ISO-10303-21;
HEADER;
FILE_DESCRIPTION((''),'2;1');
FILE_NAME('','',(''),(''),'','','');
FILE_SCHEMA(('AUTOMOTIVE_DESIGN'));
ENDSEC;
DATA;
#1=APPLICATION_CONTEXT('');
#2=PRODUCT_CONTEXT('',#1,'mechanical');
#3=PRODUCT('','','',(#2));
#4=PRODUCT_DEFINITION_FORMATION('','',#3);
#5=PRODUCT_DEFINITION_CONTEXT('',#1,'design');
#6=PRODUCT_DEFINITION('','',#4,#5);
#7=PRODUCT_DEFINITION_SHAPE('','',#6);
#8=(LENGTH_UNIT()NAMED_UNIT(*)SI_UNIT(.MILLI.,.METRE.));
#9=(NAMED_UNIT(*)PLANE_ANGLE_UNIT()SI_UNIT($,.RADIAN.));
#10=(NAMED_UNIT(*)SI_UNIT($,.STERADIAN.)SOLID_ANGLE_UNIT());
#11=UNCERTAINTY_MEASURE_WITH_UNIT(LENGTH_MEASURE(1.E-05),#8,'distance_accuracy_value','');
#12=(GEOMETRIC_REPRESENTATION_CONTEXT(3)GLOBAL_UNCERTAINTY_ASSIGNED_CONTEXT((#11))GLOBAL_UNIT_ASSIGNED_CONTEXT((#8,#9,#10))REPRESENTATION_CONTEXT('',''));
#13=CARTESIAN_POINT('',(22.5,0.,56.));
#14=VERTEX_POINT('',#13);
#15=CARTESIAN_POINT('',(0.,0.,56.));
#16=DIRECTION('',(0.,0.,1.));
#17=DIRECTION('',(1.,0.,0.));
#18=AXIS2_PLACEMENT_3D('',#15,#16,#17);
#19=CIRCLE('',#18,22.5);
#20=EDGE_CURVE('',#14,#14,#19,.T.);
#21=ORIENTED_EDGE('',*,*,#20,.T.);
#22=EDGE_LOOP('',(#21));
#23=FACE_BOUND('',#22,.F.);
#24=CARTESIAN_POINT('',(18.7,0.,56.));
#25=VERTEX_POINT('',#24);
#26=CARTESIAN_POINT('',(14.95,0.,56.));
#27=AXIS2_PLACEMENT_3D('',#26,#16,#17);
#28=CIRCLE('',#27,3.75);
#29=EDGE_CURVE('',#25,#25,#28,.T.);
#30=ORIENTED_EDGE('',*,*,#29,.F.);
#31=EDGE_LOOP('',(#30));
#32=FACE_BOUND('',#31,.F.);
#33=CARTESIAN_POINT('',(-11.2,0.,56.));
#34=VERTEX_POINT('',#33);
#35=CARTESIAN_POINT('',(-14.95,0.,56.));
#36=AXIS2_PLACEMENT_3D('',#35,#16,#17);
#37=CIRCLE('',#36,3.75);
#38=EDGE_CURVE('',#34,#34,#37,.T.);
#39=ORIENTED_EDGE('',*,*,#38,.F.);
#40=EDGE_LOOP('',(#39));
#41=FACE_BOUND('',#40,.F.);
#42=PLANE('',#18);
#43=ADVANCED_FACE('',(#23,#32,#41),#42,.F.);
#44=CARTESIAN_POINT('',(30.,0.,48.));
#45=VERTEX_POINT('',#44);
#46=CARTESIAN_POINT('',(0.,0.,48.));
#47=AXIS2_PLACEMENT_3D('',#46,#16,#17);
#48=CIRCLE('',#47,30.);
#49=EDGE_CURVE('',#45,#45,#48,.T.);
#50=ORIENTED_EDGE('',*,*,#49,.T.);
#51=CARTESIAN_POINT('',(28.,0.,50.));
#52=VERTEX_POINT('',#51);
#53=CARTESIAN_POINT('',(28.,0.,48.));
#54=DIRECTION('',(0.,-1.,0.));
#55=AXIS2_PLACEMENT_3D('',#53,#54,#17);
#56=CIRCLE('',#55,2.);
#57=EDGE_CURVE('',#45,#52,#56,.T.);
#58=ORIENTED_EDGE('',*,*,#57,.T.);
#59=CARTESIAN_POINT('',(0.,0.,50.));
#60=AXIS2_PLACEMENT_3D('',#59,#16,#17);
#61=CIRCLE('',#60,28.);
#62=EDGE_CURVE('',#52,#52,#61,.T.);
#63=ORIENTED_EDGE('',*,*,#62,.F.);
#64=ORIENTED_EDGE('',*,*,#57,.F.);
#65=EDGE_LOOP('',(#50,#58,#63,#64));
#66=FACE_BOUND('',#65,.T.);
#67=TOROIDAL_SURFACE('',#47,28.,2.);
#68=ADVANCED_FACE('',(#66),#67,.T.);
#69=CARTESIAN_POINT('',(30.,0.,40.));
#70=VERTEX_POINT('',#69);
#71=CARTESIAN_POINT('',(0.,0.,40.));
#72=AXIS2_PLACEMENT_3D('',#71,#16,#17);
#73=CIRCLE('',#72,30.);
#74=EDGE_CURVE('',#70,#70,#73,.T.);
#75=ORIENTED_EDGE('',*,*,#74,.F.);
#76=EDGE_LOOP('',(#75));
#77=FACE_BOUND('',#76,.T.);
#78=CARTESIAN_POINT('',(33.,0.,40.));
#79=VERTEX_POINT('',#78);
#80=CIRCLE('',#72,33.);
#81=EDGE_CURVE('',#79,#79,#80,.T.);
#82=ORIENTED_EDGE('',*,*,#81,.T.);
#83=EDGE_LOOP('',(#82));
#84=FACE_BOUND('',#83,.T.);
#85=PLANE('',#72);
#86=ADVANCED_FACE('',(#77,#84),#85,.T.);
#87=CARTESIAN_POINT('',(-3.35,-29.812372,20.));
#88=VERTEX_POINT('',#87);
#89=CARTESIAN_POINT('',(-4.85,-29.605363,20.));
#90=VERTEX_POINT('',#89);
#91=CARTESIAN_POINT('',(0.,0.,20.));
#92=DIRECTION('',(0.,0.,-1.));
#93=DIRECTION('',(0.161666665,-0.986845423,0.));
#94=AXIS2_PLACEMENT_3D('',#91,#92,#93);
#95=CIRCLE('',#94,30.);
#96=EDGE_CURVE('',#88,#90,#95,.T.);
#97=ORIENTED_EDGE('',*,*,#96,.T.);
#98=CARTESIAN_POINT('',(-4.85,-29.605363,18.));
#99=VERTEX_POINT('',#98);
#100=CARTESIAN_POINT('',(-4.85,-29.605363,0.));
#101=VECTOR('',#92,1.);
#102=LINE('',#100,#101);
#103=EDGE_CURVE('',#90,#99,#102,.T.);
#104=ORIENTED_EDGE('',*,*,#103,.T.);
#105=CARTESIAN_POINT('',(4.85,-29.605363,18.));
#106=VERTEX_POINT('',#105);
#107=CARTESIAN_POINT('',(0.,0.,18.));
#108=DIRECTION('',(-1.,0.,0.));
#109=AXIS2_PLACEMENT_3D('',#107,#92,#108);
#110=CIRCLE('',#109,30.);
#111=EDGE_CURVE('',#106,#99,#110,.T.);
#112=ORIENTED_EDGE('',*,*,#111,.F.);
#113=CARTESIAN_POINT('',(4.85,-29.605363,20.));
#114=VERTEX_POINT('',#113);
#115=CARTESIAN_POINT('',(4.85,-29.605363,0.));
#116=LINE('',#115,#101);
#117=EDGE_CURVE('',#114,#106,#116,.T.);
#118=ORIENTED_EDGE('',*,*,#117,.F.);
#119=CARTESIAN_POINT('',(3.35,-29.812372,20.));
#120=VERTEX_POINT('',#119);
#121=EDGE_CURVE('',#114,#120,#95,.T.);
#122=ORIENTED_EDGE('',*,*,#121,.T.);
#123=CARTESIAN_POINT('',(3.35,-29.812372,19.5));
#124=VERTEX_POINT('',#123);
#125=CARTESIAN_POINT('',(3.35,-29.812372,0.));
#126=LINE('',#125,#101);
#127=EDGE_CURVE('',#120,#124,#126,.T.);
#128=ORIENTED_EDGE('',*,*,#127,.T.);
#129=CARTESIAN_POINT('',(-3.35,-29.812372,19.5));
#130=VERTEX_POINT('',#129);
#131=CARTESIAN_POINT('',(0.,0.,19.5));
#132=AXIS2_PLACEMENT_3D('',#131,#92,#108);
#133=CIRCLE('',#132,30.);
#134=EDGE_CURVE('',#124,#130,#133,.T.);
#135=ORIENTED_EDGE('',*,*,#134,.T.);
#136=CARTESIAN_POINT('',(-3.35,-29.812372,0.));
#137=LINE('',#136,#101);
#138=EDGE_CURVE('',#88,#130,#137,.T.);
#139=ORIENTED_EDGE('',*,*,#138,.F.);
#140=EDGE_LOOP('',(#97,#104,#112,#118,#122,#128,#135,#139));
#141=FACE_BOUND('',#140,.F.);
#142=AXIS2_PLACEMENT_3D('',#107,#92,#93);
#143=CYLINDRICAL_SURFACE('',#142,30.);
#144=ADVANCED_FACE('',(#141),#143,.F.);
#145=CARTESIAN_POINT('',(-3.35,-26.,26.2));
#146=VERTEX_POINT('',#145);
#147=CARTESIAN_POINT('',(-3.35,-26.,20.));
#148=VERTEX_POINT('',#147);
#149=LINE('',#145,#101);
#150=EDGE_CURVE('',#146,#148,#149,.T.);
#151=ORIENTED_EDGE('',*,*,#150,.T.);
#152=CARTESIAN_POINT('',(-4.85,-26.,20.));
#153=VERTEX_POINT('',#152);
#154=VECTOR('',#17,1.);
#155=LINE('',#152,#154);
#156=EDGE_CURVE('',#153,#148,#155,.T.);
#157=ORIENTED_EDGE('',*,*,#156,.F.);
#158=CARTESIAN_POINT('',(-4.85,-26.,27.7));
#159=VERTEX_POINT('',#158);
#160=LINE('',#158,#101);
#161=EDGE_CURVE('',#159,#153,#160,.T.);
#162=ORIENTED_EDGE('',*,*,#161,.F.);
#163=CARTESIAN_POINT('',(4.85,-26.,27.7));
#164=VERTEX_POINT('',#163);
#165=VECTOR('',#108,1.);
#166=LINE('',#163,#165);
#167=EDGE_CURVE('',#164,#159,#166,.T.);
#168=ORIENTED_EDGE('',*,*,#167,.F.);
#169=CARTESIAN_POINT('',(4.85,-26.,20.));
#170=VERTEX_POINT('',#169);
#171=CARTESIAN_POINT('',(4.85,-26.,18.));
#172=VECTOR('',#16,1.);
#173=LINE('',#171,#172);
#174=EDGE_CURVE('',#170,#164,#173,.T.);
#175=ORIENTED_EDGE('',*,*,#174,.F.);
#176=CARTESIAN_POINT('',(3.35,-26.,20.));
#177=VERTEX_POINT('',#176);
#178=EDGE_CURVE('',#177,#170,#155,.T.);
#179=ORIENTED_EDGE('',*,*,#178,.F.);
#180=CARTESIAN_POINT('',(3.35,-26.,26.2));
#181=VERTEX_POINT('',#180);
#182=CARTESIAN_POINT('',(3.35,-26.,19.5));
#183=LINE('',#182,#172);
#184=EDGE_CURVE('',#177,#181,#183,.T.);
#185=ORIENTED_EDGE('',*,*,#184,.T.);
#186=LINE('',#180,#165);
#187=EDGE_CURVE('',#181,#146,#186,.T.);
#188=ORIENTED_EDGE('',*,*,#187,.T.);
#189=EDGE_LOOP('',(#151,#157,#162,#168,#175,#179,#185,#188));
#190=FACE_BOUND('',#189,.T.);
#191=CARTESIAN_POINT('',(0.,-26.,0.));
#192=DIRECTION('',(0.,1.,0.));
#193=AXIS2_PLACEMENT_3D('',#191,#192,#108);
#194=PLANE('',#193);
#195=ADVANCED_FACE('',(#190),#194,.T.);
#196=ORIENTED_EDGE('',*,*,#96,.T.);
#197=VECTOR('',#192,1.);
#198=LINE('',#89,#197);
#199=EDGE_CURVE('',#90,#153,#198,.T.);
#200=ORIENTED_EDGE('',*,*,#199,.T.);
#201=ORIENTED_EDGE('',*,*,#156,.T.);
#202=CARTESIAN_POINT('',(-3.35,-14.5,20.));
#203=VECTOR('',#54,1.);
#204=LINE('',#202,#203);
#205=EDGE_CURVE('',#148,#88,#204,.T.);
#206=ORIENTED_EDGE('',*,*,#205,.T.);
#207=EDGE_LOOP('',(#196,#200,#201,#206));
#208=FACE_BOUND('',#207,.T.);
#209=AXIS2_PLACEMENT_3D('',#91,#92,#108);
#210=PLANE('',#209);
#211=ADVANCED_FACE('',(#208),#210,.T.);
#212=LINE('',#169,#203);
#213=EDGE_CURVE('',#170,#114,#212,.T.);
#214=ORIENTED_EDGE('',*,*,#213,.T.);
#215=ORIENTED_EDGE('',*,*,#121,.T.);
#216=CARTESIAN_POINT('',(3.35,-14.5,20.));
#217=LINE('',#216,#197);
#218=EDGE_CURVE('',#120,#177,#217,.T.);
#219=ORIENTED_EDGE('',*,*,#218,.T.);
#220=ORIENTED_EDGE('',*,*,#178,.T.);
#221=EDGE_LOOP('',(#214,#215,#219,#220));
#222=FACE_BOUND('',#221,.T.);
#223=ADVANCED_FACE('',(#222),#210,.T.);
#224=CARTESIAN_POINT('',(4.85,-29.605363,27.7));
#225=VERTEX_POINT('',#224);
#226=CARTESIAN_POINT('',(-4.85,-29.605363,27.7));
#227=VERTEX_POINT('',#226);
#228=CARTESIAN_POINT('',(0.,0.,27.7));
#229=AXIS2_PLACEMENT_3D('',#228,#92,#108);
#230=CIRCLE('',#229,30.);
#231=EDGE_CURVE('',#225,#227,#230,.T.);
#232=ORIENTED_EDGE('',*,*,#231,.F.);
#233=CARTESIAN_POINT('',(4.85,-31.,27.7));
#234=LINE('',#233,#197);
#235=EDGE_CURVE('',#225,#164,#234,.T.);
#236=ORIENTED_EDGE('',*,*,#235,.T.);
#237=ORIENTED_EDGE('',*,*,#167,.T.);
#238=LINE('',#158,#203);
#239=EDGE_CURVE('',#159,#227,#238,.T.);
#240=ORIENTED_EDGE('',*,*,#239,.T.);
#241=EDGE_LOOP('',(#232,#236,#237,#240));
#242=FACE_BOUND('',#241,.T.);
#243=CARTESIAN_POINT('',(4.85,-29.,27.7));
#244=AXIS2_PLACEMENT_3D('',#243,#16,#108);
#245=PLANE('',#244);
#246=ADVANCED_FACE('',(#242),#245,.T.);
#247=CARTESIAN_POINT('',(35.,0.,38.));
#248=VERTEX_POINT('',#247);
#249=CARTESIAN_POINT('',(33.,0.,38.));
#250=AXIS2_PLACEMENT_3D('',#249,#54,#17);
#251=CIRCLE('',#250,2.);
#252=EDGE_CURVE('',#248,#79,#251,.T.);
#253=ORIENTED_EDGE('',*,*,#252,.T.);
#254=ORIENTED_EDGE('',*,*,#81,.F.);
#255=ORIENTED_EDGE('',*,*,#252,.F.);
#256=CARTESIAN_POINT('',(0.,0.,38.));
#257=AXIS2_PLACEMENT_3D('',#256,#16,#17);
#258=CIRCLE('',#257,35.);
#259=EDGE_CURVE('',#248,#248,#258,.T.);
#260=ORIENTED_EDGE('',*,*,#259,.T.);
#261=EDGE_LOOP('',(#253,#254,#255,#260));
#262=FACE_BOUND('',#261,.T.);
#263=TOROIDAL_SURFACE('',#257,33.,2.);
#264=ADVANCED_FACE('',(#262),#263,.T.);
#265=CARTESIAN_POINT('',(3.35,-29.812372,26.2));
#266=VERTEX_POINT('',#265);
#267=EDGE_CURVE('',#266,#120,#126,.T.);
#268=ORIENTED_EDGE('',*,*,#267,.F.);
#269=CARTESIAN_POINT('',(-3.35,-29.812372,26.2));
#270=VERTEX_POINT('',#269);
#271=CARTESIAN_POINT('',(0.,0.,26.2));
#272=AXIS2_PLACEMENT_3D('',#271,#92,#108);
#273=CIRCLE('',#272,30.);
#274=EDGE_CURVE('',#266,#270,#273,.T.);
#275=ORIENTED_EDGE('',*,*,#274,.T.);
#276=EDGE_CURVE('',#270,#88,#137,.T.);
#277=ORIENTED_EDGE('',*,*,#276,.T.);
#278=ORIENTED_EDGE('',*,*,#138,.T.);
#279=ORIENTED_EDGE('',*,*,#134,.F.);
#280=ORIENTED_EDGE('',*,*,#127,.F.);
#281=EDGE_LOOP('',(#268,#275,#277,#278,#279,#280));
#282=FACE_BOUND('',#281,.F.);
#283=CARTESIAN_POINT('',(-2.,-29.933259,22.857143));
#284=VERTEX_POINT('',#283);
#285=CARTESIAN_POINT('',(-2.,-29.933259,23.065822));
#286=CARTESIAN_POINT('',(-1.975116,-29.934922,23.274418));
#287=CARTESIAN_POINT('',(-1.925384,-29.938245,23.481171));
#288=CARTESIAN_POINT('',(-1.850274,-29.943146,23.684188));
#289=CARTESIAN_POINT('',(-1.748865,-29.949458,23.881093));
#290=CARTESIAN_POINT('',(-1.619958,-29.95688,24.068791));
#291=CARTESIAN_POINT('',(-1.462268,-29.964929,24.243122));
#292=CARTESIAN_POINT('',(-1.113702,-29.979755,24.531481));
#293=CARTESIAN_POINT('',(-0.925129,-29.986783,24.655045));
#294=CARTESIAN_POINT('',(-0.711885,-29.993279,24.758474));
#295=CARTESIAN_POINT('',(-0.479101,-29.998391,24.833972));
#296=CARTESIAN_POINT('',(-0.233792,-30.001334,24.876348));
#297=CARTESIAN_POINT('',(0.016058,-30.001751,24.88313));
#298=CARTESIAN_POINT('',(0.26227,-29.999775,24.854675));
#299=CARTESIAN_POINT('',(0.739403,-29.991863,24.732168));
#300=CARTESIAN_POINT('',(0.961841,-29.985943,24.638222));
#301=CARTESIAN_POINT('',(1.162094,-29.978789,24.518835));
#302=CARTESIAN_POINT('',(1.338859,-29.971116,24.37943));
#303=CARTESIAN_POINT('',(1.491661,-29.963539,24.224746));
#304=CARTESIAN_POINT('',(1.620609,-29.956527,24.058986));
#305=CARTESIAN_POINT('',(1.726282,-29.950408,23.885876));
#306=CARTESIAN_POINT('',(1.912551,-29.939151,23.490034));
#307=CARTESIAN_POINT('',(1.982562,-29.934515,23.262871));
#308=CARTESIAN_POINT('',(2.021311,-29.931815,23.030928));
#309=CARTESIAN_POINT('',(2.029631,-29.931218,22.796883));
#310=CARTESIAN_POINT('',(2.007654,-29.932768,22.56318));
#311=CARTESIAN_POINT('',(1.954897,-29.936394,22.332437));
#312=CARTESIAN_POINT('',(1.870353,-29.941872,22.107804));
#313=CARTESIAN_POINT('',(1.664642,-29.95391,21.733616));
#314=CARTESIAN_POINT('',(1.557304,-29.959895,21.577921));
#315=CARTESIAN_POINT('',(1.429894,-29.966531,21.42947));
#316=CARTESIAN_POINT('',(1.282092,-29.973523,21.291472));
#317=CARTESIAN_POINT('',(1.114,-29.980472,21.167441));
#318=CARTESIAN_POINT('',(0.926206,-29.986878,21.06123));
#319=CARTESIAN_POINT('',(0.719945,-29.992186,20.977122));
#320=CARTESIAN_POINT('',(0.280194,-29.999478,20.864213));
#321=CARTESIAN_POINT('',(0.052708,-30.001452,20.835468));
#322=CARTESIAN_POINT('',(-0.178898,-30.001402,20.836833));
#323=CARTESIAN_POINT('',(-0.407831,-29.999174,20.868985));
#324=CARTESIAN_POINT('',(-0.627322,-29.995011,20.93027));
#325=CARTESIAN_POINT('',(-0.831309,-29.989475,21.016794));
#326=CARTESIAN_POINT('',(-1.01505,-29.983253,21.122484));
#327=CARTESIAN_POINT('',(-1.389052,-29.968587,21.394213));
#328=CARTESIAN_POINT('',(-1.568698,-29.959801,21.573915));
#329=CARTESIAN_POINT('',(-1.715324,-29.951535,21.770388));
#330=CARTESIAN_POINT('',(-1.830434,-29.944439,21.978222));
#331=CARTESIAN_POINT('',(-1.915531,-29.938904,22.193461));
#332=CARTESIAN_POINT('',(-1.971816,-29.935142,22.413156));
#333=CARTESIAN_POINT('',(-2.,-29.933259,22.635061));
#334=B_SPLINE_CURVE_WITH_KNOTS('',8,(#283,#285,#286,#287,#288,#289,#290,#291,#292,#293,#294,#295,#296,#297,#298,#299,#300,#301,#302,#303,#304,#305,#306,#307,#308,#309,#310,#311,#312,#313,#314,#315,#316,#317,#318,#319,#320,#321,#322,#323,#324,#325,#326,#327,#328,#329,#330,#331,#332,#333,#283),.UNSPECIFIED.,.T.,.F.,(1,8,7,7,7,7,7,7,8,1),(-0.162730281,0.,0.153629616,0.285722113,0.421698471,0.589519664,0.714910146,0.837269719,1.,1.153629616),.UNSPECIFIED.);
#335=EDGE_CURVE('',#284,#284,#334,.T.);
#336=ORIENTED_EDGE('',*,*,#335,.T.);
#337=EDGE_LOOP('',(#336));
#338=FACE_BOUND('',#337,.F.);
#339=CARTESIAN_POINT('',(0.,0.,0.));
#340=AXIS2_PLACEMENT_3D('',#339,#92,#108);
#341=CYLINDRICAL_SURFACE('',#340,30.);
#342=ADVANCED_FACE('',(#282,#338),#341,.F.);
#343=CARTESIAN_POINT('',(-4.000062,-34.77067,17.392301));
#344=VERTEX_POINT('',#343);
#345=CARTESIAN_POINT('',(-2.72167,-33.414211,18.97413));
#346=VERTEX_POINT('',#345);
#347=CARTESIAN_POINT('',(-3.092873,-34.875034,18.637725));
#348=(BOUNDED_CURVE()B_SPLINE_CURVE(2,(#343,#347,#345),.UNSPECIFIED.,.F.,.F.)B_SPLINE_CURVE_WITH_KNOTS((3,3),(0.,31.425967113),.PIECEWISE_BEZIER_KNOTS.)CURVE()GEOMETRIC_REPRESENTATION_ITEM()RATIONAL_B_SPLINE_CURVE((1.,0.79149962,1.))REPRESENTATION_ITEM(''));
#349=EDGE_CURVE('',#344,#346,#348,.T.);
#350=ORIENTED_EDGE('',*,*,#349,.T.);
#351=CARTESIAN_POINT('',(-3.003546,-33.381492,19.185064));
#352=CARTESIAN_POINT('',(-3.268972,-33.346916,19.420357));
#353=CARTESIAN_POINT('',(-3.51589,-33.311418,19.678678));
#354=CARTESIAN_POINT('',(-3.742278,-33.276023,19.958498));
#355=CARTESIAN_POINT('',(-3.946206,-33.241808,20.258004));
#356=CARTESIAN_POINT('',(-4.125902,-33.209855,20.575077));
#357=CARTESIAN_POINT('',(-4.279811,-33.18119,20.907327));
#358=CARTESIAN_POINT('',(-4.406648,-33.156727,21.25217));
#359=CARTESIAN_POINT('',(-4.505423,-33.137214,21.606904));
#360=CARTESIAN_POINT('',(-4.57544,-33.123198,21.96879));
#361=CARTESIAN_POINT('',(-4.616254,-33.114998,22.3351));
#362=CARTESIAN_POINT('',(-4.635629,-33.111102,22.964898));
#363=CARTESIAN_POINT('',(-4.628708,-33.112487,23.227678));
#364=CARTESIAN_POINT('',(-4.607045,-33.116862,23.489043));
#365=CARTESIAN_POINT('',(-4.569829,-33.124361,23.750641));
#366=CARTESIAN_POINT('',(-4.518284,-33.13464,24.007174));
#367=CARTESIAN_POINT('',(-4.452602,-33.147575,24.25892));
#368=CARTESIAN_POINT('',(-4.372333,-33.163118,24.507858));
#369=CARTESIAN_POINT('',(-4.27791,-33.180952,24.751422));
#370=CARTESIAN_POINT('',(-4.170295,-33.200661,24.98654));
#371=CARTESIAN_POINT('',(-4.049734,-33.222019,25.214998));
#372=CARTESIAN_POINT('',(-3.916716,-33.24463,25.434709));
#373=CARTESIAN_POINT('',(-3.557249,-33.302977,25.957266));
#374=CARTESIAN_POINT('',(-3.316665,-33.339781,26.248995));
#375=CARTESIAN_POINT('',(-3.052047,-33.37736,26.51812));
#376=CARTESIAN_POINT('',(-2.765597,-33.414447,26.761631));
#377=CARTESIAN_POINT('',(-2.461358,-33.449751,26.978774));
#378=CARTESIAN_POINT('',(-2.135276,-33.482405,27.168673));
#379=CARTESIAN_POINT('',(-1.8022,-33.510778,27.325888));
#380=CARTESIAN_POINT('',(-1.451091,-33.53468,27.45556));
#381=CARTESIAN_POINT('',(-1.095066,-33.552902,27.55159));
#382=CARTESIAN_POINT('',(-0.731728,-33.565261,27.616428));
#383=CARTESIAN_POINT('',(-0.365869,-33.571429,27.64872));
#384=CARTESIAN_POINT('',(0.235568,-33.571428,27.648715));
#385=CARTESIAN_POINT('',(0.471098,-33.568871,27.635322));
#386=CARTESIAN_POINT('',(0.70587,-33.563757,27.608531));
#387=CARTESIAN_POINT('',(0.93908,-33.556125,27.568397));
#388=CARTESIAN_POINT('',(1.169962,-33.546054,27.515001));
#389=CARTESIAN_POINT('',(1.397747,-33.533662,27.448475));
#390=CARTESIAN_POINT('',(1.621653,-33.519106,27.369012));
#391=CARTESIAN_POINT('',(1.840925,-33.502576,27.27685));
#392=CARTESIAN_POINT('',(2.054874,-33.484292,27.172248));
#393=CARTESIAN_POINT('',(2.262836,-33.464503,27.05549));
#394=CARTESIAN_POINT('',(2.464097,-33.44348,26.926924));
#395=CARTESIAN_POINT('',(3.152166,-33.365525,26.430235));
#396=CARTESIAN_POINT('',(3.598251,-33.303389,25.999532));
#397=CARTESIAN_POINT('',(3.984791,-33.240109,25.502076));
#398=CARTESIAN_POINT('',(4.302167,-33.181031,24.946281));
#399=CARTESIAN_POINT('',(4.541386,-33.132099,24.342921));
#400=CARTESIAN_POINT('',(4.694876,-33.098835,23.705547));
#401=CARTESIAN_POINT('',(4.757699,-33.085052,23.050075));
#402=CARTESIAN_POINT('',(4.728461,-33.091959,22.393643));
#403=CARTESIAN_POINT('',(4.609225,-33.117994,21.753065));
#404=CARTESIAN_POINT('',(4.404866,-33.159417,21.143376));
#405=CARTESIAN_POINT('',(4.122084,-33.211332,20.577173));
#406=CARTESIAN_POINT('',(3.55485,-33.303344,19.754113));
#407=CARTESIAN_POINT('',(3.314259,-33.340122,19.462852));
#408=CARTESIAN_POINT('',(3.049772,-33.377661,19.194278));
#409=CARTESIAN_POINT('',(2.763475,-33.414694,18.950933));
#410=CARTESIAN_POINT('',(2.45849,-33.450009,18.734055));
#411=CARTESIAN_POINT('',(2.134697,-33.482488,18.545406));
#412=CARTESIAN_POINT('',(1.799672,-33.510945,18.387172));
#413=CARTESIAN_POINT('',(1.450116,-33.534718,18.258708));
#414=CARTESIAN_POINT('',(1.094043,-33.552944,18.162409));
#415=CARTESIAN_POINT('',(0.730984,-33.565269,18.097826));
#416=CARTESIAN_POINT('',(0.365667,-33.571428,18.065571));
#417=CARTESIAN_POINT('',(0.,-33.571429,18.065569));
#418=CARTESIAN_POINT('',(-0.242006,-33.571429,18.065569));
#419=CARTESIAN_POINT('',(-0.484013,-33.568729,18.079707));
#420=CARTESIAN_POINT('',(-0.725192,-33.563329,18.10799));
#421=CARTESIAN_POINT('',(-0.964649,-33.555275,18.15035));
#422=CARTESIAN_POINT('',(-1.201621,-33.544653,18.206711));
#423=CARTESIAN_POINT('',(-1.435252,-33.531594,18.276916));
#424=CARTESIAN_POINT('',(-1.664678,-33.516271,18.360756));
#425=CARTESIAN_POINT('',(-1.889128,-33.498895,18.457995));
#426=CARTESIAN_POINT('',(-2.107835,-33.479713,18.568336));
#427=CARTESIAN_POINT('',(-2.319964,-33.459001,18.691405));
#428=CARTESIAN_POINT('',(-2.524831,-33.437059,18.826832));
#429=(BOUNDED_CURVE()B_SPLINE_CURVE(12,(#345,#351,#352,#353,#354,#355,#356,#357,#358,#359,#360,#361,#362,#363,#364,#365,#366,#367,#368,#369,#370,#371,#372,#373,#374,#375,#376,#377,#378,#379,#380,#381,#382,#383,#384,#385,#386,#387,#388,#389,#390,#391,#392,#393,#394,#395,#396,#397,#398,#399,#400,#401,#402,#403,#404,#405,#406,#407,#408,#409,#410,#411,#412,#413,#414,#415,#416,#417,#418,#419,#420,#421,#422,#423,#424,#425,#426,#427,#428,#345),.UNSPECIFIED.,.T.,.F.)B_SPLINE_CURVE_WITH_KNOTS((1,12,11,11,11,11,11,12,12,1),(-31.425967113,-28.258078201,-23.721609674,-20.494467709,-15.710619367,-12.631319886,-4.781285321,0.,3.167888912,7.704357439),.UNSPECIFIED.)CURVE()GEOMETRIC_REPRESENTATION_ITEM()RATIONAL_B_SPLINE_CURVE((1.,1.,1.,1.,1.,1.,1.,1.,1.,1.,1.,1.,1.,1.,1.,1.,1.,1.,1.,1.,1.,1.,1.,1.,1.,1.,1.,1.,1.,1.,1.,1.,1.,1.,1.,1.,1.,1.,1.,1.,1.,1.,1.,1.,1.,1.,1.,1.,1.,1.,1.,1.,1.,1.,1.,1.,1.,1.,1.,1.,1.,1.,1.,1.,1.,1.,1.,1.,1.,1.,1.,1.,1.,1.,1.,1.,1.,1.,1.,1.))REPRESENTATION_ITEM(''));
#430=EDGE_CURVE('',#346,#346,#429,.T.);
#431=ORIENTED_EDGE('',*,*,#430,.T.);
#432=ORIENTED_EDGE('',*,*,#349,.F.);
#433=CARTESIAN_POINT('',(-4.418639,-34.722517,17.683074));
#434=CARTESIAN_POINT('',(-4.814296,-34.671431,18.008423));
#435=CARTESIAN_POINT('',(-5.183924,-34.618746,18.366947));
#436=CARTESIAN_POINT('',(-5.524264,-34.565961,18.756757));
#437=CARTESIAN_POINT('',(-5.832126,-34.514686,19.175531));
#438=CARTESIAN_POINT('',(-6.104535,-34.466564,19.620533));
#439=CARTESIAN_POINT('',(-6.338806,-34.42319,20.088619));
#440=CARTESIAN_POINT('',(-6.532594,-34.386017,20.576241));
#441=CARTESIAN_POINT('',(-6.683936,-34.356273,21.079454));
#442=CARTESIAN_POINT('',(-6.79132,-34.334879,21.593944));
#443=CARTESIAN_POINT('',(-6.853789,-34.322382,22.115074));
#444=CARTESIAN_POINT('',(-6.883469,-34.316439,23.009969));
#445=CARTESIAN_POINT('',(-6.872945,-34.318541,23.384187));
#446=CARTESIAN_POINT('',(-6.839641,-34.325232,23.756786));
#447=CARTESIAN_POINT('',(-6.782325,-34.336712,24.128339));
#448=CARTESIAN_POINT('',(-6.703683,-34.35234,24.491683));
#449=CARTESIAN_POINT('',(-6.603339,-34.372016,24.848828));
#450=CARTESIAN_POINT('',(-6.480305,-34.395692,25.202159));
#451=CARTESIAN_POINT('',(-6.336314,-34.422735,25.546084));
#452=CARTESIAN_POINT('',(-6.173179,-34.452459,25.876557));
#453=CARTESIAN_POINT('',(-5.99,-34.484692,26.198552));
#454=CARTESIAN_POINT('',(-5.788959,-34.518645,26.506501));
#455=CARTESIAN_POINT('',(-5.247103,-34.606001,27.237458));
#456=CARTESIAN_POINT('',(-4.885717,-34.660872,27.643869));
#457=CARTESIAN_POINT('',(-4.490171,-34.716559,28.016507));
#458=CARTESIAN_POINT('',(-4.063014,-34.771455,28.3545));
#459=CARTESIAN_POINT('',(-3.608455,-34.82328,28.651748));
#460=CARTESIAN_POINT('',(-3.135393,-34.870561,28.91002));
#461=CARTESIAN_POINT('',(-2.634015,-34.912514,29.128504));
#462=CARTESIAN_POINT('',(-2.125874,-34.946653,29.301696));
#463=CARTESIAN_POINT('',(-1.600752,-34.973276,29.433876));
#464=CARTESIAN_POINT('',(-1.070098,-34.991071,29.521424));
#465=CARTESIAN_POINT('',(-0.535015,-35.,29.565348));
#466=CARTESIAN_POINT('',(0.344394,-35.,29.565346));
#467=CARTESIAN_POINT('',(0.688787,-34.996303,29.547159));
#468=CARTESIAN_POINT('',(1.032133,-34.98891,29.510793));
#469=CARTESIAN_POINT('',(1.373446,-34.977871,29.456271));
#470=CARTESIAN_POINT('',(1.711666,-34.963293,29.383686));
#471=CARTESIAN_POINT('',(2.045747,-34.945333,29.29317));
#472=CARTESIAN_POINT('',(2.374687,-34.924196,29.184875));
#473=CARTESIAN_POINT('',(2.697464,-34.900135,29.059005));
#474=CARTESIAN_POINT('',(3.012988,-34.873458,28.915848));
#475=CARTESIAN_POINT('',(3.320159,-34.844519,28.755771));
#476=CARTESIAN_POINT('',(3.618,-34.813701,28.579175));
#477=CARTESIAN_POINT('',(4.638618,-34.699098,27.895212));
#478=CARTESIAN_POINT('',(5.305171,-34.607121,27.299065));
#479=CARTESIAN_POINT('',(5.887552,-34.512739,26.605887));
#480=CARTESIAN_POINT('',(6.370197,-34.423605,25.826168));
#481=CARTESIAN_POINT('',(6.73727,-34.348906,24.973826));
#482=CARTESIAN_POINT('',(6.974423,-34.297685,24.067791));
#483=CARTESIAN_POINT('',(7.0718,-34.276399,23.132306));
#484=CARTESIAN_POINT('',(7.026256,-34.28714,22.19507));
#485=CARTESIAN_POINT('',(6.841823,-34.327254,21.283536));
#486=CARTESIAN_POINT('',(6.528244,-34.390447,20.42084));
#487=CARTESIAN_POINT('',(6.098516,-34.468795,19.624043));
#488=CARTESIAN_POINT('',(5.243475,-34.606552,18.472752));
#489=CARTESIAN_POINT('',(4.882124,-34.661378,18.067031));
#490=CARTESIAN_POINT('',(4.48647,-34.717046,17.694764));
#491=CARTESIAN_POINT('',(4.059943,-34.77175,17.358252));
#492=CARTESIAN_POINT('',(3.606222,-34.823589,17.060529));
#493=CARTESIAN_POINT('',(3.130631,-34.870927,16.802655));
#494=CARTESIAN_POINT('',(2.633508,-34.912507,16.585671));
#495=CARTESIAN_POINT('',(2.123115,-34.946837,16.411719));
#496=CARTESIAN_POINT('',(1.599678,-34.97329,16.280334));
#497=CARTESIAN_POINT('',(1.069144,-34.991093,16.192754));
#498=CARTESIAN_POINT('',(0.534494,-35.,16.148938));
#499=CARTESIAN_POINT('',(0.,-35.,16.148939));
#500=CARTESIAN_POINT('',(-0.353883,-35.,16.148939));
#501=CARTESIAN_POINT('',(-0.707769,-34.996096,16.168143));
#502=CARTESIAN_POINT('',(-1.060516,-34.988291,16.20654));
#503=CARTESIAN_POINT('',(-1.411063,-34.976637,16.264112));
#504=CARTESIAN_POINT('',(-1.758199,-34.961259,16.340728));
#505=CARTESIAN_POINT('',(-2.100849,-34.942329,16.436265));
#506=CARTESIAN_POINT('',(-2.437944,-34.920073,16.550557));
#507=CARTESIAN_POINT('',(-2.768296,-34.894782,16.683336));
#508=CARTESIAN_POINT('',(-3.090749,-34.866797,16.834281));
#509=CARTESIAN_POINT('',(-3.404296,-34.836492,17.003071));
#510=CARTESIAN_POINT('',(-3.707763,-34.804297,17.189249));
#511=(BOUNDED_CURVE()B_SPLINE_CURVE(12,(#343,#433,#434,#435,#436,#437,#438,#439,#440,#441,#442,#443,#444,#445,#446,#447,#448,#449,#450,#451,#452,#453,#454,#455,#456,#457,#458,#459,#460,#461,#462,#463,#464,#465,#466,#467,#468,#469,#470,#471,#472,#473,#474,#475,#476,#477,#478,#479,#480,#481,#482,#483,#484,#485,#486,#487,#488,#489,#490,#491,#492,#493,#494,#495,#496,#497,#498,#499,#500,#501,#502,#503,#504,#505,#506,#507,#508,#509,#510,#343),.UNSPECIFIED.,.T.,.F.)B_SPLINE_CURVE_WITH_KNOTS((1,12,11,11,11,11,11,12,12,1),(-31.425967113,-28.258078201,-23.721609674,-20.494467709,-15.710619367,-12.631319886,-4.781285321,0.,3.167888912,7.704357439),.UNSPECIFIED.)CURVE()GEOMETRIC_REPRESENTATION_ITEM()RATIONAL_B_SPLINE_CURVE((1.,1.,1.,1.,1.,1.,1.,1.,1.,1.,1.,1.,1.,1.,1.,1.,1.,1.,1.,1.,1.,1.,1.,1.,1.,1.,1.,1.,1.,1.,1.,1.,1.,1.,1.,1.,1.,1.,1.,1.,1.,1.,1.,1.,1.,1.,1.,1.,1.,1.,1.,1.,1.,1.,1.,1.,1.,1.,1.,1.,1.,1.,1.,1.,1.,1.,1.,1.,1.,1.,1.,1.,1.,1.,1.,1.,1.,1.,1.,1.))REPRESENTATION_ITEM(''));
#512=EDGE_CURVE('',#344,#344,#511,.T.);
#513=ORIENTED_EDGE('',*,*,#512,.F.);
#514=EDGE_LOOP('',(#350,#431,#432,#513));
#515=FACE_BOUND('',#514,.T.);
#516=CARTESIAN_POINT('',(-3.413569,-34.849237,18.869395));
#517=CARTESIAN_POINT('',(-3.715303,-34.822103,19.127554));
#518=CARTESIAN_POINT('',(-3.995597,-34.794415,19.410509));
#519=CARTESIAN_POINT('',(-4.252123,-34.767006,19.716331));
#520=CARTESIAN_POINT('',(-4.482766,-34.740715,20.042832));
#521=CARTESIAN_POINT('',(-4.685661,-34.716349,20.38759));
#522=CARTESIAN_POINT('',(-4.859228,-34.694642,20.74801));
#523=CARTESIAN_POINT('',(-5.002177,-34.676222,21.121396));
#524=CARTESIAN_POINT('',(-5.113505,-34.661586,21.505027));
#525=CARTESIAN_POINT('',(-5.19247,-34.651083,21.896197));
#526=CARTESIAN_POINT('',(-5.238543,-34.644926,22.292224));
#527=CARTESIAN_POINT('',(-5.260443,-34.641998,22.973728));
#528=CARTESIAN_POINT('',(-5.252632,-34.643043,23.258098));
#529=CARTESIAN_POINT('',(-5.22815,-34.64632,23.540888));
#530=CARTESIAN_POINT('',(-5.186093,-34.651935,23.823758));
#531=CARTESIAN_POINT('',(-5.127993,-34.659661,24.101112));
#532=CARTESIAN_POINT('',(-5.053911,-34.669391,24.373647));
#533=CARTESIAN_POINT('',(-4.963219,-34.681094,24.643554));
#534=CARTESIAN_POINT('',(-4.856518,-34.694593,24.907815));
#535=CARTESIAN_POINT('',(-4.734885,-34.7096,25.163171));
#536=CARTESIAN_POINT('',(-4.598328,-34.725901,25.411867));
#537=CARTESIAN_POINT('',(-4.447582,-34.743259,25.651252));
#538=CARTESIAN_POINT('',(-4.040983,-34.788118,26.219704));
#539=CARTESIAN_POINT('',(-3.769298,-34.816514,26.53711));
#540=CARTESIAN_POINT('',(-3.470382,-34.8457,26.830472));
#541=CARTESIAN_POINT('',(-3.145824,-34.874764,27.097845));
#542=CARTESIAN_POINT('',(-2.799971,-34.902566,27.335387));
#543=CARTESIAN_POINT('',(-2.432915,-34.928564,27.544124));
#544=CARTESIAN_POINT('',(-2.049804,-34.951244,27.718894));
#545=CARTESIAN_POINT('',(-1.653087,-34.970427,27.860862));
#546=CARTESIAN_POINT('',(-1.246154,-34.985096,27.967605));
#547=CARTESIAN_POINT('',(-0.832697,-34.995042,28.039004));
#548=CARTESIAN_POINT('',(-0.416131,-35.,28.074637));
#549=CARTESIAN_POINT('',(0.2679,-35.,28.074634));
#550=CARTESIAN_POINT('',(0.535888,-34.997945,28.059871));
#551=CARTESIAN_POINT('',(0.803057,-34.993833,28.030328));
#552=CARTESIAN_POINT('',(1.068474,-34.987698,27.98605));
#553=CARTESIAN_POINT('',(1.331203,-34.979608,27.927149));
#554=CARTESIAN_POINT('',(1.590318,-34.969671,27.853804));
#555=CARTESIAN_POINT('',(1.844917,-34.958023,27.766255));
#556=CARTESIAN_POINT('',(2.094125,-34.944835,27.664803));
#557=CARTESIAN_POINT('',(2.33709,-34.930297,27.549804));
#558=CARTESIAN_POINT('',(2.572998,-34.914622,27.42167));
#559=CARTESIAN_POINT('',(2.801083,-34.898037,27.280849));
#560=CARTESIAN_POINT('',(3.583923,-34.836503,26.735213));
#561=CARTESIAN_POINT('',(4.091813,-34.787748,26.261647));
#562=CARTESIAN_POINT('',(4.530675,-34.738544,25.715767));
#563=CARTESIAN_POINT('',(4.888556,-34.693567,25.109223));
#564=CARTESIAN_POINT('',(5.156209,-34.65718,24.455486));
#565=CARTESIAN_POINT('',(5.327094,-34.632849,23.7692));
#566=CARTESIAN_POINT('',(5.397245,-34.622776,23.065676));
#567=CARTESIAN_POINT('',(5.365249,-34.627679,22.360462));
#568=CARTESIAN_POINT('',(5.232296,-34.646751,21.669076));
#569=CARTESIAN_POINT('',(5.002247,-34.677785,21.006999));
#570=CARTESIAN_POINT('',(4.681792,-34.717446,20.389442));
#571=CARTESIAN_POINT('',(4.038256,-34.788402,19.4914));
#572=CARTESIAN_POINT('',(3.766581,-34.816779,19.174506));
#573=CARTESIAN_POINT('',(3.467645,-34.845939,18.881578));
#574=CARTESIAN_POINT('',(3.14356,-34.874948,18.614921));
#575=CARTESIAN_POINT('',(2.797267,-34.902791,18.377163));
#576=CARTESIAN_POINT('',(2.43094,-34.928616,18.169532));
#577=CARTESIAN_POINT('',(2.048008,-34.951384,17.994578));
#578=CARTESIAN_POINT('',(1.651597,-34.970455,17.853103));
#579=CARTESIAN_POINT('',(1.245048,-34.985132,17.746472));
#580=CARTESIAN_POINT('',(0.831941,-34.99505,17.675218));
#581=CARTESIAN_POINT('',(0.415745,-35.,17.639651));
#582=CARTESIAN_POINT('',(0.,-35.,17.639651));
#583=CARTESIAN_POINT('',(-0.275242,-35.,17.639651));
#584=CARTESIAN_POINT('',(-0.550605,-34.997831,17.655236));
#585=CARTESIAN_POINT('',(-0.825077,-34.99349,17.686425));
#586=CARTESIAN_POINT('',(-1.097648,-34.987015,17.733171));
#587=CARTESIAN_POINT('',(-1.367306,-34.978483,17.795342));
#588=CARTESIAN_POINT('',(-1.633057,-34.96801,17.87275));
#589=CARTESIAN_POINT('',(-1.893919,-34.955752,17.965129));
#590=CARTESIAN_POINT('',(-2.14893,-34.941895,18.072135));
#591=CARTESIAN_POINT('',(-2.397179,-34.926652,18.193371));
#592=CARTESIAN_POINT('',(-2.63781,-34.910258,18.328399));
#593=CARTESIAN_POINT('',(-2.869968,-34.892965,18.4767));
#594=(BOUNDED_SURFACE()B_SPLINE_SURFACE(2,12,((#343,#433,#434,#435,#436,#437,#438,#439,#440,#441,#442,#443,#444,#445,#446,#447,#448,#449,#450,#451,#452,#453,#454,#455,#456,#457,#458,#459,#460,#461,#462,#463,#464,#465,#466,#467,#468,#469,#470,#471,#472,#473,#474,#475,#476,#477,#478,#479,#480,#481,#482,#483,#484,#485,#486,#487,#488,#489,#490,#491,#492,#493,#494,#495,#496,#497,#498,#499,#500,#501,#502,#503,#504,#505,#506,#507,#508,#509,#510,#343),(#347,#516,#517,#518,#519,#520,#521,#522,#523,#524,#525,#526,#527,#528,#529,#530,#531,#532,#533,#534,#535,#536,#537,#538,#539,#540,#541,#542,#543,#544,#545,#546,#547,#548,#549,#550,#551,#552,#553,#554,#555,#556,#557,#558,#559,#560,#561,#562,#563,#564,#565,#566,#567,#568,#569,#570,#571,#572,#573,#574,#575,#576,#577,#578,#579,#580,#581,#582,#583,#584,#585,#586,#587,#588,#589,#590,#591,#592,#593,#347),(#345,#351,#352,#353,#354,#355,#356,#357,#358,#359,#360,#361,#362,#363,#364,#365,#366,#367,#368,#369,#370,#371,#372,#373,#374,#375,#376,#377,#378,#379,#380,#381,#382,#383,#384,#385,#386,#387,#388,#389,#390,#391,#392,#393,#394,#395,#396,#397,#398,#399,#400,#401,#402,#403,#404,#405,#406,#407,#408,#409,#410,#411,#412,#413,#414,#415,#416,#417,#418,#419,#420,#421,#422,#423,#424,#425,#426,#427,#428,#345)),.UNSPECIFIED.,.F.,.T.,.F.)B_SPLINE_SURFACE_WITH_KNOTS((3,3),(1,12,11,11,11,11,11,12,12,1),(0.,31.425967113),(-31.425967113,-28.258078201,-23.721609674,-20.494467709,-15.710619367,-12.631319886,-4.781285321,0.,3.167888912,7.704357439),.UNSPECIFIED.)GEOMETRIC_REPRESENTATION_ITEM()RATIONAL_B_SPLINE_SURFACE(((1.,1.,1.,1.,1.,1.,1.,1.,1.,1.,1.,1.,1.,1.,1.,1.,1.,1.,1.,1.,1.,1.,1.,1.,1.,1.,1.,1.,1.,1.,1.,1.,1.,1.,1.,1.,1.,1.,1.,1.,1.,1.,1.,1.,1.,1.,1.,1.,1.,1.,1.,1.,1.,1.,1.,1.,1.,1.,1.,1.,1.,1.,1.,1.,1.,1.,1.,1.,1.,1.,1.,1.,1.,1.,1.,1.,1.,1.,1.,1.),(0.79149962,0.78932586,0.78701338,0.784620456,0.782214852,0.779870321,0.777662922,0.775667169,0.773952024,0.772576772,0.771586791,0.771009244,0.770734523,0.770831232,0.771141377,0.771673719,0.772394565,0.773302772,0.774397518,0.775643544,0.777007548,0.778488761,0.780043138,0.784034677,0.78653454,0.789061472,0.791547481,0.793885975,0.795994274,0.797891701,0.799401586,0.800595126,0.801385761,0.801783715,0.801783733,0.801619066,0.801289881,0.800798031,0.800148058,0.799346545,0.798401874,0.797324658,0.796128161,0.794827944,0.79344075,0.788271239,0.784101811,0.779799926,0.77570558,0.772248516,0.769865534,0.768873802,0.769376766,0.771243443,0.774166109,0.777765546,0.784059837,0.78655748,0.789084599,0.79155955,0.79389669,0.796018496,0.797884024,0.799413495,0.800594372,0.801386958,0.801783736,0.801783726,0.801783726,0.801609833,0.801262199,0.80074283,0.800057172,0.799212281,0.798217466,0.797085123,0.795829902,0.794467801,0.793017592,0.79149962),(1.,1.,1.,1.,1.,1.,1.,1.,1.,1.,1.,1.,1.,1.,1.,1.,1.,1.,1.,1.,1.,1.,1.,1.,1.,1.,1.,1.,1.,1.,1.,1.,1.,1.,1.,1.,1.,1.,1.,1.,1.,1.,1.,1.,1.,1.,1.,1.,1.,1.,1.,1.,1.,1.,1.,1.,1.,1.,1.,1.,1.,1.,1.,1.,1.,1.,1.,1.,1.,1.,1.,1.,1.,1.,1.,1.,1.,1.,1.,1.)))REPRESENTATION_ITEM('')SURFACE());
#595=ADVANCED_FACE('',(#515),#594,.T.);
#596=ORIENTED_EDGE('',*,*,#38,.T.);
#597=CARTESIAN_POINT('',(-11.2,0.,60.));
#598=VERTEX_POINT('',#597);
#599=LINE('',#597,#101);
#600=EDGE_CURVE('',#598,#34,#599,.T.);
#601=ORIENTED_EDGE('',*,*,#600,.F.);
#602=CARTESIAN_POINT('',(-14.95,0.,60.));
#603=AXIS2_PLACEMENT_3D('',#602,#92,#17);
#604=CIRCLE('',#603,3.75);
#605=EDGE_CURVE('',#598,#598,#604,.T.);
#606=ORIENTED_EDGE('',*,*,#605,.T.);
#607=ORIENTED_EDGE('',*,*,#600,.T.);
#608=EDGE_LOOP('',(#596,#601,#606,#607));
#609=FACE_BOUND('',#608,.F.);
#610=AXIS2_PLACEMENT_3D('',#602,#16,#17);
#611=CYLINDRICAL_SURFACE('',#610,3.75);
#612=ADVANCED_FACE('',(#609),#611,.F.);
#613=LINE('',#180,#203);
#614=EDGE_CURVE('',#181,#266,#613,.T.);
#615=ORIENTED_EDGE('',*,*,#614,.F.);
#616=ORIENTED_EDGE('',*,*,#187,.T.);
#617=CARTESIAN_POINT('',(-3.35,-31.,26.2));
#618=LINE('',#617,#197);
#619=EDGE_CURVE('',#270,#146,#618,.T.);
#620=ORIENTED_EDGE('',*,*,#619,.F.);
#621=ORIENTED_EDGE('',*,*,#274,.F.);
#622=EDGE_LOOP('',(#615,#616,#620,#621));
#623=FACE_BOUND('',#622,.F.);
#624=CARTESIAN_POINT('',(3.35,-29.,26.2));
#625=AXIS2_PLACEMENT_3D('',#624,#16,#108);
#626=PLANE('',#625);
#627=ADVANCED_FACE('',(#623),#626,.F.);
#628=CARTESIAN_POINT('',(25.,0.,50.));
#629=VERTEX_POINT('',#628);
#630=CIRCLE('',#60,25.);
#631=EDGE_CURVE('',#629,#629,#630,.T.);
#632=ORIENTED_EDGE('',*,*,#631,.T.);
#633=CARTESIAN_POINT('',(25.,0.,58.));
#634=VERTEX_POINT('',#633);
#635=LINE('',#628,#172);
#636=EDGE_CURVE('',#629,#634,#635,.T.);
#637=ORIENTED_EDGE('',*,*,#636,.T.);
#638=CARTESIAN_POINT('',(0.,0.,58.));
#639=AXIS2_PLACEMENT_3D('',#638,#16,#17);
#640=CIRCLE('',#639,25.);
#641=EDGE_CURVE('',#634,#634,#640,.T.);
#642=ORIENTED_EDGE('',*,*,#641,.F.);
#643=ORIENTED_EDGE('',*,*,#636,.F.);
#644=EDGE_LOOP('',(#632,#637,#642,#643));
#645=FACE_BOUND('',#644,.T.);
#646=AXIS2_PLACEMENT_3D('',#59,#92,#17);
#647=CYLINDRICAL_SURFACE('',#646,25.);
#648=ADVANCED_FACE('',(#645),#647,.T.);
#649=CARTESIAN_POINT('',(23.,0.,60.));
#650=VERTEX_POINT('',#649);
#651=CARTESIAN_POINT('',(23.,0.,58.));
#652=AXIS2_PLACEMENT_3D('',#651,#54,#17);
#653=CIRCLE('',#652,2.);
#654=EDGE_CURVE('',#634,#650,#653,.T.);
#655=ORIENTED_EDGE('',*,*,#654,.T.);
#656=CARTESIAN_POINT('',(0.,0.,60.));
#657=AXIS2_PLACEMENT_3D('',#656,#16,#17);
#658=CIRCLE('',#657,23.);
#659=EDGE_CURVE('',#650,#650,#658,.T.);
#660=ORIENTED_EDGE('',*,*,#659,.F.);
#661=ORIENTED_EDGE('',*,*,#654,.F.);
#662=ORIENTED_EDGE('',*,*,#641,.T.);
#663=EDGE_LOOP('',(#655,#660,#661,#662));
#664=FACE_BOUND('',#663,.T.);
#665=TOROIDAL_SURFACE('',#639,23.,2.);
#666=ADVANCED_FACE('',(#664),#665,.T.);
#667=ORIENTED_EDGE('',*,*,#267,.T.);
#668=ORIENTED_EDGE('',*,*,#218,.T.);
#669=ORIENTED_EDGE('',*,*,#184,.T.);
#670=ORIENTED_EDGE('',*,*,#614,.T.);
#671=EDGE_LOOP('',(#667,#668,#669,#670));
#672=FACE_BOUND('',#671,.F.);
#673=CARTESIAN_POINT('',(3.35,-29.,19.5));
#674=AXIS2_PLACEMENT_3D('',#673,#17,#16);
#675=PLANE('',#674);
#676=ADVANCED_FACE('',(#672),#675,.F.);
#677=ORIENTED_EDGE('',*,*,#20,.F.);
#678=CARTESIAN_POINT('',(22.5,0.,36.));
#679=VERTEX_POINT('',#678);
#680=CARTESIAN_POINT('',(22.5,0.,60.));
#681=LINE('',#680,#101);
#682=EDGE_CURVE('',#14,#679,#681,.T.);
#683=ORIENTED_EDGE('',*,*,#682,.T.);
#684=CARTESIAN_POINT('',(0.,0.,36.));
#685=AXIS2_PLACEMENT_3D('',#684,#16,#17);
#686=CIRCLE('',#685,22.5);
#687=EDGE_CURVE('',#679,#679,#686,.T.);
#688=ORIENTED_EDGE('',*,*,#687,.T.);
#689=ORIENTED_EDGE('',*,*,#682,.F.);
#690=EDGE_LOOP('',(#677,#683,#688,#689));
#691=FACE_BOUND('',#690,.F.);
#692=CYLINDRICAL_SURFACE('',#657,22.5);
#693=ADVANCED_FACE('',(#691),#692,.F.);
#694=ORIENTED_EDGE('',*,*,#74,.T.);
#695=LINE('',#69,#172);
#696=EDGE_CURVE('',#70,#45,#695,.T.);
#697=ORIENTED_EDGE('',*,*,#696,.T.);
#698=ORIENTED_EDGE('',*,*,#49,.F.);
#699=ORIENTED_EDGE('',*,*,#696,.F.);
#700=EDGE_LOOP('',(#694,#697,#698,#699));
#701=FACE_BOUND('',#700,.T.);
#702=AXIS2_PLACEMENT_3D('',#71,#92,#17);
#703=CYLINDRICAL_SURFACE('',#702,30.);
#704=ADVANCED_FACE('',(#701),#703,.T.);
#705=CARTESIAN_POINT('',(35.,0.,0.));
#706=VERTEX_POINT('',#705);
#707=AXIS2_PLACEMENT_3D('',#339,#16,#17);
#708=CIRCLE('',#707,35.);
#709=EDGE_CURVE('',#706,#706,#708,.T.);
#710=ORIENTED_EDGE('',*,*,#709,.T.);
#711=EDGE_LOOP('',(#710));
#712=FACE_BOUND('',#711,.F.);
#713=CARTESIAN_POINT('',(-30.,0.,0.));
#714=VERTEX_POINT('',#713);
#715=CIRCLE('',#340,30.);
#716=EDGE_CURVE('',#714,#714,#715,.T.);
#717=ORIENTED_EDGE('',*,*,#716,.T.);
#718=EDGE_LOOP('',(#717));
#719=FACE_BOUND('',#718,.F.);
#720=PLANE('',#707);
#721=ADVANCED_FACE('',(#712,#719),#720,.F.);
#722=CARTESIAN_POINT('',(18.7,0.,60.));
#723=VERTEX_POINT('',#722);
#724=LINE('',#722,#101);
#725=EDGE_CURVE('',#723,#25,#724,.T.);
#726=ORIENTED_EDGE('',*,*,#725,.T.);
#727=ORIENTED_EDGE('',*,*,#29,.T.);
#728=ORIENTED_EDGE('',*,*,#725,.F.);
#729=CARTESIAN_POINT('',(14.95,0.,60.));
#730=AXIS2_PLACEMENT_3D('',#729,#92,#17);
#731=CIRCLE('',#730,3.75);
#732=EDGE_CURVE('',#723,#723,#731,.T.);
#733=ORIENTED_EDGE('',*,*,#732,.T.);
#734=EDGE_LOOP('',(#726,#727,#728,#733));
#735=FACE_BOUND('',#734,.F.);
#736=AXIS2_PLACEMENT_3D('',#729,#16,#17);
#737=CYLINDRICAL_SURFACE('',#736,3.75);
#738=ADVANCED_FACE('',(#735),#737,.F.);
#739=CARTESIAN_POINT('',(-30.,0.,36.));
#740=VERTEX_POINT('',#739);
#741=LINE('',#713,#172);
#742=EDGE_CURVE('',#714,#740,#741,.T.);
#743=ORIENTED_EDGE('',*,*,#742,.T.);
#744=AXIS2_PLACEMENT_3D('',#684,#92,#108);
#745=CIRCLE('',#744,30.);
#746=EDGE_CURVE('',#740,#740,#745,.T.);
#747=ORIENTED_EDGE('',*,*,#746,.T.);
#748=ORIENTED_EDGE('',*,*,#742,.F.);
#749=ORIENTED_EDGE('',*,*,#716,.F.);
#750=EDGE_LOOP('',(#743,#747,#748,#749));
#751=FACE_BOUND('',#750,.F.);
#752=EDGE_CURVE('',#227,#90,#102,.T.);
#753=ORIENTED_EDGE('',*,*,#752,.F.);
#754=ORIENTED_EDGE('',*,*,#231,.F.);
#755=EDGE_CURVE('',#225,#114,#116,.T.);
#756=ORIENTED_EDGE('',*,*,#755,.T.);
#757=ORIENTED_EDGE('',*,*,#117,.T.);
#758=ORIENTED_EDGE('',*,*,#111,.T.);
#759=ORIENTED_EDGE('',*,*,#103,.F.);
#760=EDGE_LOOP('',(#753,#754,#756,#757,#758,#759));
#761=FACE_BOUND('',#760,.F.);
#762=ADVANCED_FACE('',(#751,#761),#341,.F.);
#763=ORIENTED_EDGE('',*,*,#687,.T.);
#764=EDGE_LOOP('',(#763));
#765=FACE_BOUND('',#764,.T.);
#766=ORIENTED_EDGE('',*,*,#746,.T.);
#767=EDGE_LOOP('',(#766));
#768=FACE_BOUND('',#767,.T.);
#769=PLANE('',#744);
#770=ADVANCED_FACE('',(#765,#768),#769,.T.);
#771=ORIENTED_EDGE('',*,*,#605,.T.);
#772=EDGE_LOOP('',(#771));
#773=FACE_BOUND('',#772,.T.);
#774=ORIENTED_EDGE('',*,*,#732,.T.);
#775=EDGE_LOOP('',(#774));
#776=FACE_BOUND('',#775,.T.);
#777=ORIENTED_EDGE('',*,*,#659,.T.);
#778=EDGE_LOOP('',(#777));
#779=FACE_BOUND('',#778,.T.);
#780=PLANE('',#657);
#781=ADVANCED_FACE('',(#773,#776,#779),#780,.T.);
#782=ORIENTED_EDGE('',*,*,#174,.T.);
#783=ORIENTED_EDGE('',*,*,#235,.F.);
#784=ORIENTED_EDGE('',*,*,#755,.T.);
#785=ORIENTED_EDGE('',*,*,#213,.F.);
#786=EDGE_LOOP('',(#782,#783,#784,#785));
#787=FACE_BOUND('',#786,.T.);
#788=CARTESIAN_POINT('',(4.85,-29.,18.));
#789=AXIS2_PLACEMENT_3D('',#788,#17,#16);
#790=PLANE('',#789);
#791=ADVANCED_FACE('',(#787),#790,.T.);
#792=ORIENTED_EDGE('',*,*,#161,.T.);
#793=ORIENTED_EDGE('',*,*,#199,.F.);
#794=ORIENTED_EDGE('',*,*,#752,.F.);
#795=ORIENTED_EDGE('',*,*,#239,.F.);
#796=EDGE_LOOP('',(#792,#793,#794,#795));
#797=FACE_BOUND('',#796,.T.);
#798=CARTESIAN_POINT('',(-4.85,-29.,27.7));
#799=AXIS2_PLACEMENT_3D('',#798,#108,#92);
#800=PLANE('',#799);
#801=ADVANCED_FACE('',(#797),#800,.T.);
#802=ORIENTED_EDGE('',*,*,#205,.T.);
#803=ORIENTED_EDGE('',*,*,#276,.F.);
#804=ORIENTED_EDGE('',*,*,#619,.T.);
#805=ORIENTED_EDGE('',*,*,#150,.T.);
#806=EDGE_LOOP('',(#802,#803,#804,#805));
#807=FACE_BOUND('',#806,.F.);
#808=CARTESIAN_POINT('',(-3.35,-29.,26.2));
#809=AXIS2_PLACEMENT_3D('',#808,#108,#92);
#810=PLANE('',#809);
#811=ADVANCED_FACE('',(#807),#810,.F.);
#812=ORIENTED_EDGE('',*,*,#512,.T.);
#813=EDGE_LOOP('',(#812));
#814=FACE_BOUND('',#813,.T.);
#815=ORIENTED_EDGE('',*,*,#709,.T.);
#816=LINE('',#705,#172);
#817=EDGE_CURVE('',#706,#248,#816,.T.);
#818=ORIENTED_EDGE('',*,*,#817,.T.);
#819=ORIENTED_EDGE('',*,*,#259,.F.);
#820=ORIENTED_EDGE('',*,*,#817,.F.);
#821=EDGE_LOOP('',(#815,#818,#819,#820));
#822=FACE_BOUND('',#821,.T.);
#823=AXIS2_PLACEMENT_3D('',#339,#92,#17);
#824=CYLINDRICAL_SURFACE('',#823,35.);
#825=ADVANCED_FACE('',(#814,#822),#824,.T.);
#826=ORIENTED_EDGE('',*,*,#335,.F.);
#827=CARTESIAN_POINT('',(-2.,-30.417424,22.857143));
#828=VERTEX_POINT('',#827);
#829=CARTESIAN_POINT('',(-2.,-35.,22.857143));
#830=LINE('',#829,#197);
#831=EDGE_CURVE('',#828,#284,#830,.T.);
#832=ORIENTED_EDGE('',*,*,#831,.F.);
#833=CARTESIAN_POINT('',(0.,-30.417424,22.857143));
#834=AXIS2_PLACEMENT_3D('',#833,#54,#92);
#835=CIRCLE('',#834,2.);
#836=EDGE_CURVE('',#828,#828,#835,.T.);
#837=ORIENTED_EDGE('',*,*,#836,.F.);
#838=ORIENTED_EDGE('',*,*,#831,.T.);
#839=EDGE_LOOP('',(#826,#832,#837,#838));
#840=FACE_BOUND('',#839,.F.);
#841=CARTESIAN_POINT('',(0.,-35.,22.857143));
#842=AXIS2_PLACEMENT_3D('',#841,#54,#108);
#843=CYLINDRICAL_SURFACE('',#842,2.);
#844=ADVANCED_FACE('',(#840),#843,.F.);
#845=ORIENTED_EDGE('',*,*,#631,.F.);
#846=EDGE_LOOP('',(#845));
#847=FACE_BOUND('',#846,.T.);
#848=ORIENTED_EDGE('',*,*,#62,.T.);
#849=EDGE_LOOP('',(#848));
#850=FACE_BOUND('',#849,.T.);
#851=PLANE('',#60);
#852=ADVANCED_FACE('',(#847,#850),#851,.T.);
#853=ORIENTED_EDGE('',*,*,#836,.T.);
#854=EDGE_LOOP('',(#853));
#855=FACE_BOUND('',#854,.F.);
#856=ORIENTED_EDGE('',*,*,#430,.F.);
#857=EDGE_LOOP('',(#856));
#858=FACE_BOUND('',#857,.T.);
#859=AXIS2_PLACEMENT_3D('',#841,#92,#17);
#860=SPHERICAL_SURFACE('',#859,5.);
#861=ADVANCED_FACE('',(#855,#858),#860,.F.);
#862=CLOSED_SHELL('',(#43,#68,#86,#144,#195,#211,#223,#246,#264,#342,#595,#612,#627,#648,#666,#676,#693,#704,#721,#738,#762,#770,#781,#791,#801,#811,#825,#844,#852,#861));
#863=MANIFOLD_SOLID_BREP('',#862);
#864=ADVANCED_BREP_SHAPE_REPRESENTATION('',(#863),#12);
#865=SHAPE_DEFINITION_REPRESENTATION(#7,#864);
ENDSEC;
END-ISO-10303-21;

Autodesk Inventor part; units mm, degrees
sketch "Sketch1" plane through (0, 0, 0) normal (0, 0, 1) x (1, 0, 0)
  point P0 (0, 0)
sketch "Sketch2" plane through (0, 0, 0) normal (0, 0, 1) x (1, 0, 0)
  circle A0 centre (0, 0) radius 35
  dimension "d0" = 70
ref_plane "Work Plane1" through (0, 0, 30) normal (0, 0, 1) x (1, 0, 0)
sketch "Sketch3" plane through (0, 0, 30) normal (0, 0, 1) x (1, 0, 0)
  circle A0 centre (0, 0) radius 30
  dimension "d3" = 60
ref_plane "Work Plane2" through (0, 0, 35) normal (0, 0, 1) x (1, 0, 0)
sketch "Sketch4" plane through (0, 0, 35) normal (0, 0, 1) x (1, 0, 0)
  circle A0 centre (0, 0) radius 25
  dimension "d7" = 50
extrude "Extrusion1" add sketch "Sketch2" along normal blind 40
fillet "Fillet2" radius 2 1 edges at (-35, 0, 40)
ref_plane "Work Plane3" through (0, 0, 40) normal (0, 0, 1) x (1, 0, 0)
sketch "Sketch9" plane through (0, 0, 40) normal (0, 0, 1) x (1, 0, 0)
  circle A0 centre (0, 0) radius 33 projected
  circle A1 centre (0, 0) radius 30
  dimension "d42" = 60
extrude "Extrusion8" add sketch "Sketch9" along normal blind 10 contours A1
sketch "Sketch10" plane through (0, 0, 50) normal (0, 0, 1) x (1, 0, 0)
  circle A0 centre (0, 0) radius 30 projected
  circle A1 centre (0, 0) radius 25
  dimension "d45" = 50
extrude "Extrusion9" add sketch "Sketch10" along normal blind 10 contours A1
sketch "Sketch11" plane through (0, 0, 60) normal (0, 0, 1) x (1, 0, 0)
  circle A0 centre (0, 0) radius 25 projected
  circle A1 centre (0, 0) radius 22.5
  dimension "d48" = 45
extrude "Extrusion10" cut sketch "Sketch11" against normal blind 60 contours A1
sketch "Sketch14" plane through (0, 0, 0) normal (0, 0, -1) x (-1, 0, 0)
  circle A0 centre (0, 0) radius 22.5 projected
  circle A1 centre (0, 0) radius 35 projected
  circle A2 centre (0, 0) radius 30
  dimension "d58" = 60
extrude "Extrusion12" cut sketch "Sketch14" against normal blind 36 contours A2
sketch "Sketch15" plane through (0, 0, 36) normal (0, 0, -1) x (-1, 0, 0)
  circle A0 centre (0, 0) radius 22.5 projected
  circle A1 centre (0, 0) radius 30 projected
ref_plane "Work Plane4" through (0, 0, 60) normal (0, 0, 1) x (1, 0, 0)
sketch "Sketch18" plane through (0, 0, 60) normal (0, 0, 1) x (1, 0, 0)
  circle A0 centre (-14.95, 0) radius 3.75
  line L0 (-49, 0) -> (49, 0) projected
  line L1 (0, -49) -> (0, 49) projected
  circle A1 centre (14.95, 0) radius 3.75
  circle A2 centre (0, 0) radius 22.5
  point P0 (22.5, 0)
  point P1 (-11.2, 0)
  point P2 (10.775, 0)
  dimension "d71" = 7.5
  dimension "d78" = 14.95
  dimension "d81" = 45
extrude "Extrusion16" add sketch "Sketch18" against normal blind 4 contours L0 L1 A2 A0 | A0 L0 A2 L1 | L1 A2 L0 A1 | L0 A1 A2 L1
fillet "Fillet5" radius 2 2 edges at (-30, 0, 50) (-25, 0, 60)
ref_plane "Work Plane5" through (0, -35, 0) normal (0, 1, 0) x (-1, 0, 0)
sketch "Sketch19" plane through (0, -35, 0) normal (0, 1, 0) x (-1, 0, 0)
  line L0 (49, 0) -> (-49, 0)
  line L1 (0, -12) -> (0, 72)
  arc A0 (0, 27.857143) -> (0, 17.857143) centre (0, 22.857143) ccw
  line L2 (0, 27.857143) -> (0, 17.857143)
  point P0 (0, 0)
  dimension "d86" = 10
revolve "Revolution1" cut sketch "Sketch19" angle 360 about axis through (0, -35, -10) along (0, 0, 1)
ref_plane "Work Plane6" through (0, -35, 0) normal (0, 1, 0) x (-1, 0, 0)
sketch "Sketch20" plane through (0, -35, 0) normal (0, 1, 0) x (-1, 0, 0)
  line L0 (0, -12) -> (0, 72)
  line L1 (49, 0) -> (-49, 0)
  line L2 (0, 27.857143) -> (0, 17.857143)
  circle A0 centre (0, 22.857143) radius 2
  point P0 (0, 0)
  dimension "d90" = 4
extrude "Extrusion17" cut sketch "Sketch20" along normal blind 10
ref_plane "Work Plane7" through (0, -29, 0) normal (0, 1, 0) x (-1, 0, 0)
sketch "Sketch21" plane through (0, -29, 0) normal (0, 1, 0) x (-1, 0, 0)
  line L0 (-4.85, 27.7) -> (4.85, 27.7)
  line L1 (4.85, 27.7) -> (4.85, 18)
  line L2 (4.85, 18) -> (-4.85, 18)
  line L3 (-4.85, 18) -> (-4.85, 27.7)
  line L4 (-3.35, 26.2) -> (3.35, 26.2)
  line L5 (3.35, 26.2) -> (3.35, 19.5)
  line L6 (3.35, 19.5) -> (-3.35, 19.5)
  line L7 (-3.35, 19.5) -> (-3.35, 26.2)
  line L8 (-35, 0) -> (35, 0) projected
  line L9 (-49, 0) -> (49, 0) projected
  line L10 (49, 0) -> (-49, 0) projected
  line L11 (0, -12) -> (0, 72) projected
  point P0 (0, 0)
  dimension "d99" = 18
  dimension "d101" = 6.7
  dimension "d102" = 1.5
  dimension "d103" = 1.5
  dimension "d104" = 1.5
  dimension "d105" = 6.7
extrude "Extrusion18" add sketch "Sketch21" along normal blind 3 and the other way blind 2 contours L0 L11 L4 L7 L6 L2 L3 | L0 L1 L2 L11 L6 L5 L4
fillet "Fillet6" radius 2 2 edges at (-4.9872, -34.6429, 22.8521) (4.9872, -34.6429, 22.8557)
sketch "Sketch22" plane through (0, 0, 18) normal (0, 0, -1) x (-1, 0, 0)
  arc A0 (-4.85, -29.605363) -> (4.85, -29.605363) centre (0, 0) ccw
  line L0 (-4.85, -26) -> (-4.85, -29.605363)
  line L1 (-4.85, -26) -> (4.85, -26)
  line L2 (4.85, -26) -> (4.85, -29.605363)
  line L3 (-4.85, -29.605363) -> (-4.85, -26)
  arc A1 (-4.85, -29.605363) -> (4.85, -29.605363) centre (0, -1.266986) ccw
sketch "Sketch22 outline for Extrusion19" plane through (0, 0, 18) normal (0, 0, -1) x (-1, 0, 0)
  line L0 (-4.85, -26) -> (-4.85, -29.605363)
  line L1 (4.85, -26) -> (-4.85, -26)
  line L2 (4.85, -29.605363) -> (4.85, -26)
  arc A0 (-4.85, -29.605363) -> (4.85, -29.605363) centre (0, 0) ccw
extrude "Extrusion19" cut sketch "Sketch22 outline for Extrusion19" against normal blind 2
sketch "Sketch23" plane through (0, -26, 0) normal (0, 1, 0) x (1, 0, 0)
  line L0 (4.85, -20) -> (3.35, -20)
  line L1 (3.35, -20) -> (3.35, -26.2)
  line L2 (3.35, -26.2) -> (-3.35, -26.2)
  line L3 (-3.35, -26.2) -> (-3.35, -20)
  line L4 (-3.35, -20) -> (-4.85, -20)
  line L5 (-4.85, -20) -> (-4.85, -27.7)
  line L6 (-4.85, -27.7) -> (4.85, -27.7)
  line L7 (4.85, -27.7) -> (4.85, -20)
  line L8 (-3.35, -21.72852) -> (3.35, -21.72852)
  line L9 (3.35, -21.72852) -> (3.35, -26.2)
  line L10 (3.35, -26.2) -> (-3.35, -26.2)
  line L11 (-3.35, -26.2) -> (-3.35, -21.72852)
  point P0 (0, 0)
properties part number "Carcasa"
